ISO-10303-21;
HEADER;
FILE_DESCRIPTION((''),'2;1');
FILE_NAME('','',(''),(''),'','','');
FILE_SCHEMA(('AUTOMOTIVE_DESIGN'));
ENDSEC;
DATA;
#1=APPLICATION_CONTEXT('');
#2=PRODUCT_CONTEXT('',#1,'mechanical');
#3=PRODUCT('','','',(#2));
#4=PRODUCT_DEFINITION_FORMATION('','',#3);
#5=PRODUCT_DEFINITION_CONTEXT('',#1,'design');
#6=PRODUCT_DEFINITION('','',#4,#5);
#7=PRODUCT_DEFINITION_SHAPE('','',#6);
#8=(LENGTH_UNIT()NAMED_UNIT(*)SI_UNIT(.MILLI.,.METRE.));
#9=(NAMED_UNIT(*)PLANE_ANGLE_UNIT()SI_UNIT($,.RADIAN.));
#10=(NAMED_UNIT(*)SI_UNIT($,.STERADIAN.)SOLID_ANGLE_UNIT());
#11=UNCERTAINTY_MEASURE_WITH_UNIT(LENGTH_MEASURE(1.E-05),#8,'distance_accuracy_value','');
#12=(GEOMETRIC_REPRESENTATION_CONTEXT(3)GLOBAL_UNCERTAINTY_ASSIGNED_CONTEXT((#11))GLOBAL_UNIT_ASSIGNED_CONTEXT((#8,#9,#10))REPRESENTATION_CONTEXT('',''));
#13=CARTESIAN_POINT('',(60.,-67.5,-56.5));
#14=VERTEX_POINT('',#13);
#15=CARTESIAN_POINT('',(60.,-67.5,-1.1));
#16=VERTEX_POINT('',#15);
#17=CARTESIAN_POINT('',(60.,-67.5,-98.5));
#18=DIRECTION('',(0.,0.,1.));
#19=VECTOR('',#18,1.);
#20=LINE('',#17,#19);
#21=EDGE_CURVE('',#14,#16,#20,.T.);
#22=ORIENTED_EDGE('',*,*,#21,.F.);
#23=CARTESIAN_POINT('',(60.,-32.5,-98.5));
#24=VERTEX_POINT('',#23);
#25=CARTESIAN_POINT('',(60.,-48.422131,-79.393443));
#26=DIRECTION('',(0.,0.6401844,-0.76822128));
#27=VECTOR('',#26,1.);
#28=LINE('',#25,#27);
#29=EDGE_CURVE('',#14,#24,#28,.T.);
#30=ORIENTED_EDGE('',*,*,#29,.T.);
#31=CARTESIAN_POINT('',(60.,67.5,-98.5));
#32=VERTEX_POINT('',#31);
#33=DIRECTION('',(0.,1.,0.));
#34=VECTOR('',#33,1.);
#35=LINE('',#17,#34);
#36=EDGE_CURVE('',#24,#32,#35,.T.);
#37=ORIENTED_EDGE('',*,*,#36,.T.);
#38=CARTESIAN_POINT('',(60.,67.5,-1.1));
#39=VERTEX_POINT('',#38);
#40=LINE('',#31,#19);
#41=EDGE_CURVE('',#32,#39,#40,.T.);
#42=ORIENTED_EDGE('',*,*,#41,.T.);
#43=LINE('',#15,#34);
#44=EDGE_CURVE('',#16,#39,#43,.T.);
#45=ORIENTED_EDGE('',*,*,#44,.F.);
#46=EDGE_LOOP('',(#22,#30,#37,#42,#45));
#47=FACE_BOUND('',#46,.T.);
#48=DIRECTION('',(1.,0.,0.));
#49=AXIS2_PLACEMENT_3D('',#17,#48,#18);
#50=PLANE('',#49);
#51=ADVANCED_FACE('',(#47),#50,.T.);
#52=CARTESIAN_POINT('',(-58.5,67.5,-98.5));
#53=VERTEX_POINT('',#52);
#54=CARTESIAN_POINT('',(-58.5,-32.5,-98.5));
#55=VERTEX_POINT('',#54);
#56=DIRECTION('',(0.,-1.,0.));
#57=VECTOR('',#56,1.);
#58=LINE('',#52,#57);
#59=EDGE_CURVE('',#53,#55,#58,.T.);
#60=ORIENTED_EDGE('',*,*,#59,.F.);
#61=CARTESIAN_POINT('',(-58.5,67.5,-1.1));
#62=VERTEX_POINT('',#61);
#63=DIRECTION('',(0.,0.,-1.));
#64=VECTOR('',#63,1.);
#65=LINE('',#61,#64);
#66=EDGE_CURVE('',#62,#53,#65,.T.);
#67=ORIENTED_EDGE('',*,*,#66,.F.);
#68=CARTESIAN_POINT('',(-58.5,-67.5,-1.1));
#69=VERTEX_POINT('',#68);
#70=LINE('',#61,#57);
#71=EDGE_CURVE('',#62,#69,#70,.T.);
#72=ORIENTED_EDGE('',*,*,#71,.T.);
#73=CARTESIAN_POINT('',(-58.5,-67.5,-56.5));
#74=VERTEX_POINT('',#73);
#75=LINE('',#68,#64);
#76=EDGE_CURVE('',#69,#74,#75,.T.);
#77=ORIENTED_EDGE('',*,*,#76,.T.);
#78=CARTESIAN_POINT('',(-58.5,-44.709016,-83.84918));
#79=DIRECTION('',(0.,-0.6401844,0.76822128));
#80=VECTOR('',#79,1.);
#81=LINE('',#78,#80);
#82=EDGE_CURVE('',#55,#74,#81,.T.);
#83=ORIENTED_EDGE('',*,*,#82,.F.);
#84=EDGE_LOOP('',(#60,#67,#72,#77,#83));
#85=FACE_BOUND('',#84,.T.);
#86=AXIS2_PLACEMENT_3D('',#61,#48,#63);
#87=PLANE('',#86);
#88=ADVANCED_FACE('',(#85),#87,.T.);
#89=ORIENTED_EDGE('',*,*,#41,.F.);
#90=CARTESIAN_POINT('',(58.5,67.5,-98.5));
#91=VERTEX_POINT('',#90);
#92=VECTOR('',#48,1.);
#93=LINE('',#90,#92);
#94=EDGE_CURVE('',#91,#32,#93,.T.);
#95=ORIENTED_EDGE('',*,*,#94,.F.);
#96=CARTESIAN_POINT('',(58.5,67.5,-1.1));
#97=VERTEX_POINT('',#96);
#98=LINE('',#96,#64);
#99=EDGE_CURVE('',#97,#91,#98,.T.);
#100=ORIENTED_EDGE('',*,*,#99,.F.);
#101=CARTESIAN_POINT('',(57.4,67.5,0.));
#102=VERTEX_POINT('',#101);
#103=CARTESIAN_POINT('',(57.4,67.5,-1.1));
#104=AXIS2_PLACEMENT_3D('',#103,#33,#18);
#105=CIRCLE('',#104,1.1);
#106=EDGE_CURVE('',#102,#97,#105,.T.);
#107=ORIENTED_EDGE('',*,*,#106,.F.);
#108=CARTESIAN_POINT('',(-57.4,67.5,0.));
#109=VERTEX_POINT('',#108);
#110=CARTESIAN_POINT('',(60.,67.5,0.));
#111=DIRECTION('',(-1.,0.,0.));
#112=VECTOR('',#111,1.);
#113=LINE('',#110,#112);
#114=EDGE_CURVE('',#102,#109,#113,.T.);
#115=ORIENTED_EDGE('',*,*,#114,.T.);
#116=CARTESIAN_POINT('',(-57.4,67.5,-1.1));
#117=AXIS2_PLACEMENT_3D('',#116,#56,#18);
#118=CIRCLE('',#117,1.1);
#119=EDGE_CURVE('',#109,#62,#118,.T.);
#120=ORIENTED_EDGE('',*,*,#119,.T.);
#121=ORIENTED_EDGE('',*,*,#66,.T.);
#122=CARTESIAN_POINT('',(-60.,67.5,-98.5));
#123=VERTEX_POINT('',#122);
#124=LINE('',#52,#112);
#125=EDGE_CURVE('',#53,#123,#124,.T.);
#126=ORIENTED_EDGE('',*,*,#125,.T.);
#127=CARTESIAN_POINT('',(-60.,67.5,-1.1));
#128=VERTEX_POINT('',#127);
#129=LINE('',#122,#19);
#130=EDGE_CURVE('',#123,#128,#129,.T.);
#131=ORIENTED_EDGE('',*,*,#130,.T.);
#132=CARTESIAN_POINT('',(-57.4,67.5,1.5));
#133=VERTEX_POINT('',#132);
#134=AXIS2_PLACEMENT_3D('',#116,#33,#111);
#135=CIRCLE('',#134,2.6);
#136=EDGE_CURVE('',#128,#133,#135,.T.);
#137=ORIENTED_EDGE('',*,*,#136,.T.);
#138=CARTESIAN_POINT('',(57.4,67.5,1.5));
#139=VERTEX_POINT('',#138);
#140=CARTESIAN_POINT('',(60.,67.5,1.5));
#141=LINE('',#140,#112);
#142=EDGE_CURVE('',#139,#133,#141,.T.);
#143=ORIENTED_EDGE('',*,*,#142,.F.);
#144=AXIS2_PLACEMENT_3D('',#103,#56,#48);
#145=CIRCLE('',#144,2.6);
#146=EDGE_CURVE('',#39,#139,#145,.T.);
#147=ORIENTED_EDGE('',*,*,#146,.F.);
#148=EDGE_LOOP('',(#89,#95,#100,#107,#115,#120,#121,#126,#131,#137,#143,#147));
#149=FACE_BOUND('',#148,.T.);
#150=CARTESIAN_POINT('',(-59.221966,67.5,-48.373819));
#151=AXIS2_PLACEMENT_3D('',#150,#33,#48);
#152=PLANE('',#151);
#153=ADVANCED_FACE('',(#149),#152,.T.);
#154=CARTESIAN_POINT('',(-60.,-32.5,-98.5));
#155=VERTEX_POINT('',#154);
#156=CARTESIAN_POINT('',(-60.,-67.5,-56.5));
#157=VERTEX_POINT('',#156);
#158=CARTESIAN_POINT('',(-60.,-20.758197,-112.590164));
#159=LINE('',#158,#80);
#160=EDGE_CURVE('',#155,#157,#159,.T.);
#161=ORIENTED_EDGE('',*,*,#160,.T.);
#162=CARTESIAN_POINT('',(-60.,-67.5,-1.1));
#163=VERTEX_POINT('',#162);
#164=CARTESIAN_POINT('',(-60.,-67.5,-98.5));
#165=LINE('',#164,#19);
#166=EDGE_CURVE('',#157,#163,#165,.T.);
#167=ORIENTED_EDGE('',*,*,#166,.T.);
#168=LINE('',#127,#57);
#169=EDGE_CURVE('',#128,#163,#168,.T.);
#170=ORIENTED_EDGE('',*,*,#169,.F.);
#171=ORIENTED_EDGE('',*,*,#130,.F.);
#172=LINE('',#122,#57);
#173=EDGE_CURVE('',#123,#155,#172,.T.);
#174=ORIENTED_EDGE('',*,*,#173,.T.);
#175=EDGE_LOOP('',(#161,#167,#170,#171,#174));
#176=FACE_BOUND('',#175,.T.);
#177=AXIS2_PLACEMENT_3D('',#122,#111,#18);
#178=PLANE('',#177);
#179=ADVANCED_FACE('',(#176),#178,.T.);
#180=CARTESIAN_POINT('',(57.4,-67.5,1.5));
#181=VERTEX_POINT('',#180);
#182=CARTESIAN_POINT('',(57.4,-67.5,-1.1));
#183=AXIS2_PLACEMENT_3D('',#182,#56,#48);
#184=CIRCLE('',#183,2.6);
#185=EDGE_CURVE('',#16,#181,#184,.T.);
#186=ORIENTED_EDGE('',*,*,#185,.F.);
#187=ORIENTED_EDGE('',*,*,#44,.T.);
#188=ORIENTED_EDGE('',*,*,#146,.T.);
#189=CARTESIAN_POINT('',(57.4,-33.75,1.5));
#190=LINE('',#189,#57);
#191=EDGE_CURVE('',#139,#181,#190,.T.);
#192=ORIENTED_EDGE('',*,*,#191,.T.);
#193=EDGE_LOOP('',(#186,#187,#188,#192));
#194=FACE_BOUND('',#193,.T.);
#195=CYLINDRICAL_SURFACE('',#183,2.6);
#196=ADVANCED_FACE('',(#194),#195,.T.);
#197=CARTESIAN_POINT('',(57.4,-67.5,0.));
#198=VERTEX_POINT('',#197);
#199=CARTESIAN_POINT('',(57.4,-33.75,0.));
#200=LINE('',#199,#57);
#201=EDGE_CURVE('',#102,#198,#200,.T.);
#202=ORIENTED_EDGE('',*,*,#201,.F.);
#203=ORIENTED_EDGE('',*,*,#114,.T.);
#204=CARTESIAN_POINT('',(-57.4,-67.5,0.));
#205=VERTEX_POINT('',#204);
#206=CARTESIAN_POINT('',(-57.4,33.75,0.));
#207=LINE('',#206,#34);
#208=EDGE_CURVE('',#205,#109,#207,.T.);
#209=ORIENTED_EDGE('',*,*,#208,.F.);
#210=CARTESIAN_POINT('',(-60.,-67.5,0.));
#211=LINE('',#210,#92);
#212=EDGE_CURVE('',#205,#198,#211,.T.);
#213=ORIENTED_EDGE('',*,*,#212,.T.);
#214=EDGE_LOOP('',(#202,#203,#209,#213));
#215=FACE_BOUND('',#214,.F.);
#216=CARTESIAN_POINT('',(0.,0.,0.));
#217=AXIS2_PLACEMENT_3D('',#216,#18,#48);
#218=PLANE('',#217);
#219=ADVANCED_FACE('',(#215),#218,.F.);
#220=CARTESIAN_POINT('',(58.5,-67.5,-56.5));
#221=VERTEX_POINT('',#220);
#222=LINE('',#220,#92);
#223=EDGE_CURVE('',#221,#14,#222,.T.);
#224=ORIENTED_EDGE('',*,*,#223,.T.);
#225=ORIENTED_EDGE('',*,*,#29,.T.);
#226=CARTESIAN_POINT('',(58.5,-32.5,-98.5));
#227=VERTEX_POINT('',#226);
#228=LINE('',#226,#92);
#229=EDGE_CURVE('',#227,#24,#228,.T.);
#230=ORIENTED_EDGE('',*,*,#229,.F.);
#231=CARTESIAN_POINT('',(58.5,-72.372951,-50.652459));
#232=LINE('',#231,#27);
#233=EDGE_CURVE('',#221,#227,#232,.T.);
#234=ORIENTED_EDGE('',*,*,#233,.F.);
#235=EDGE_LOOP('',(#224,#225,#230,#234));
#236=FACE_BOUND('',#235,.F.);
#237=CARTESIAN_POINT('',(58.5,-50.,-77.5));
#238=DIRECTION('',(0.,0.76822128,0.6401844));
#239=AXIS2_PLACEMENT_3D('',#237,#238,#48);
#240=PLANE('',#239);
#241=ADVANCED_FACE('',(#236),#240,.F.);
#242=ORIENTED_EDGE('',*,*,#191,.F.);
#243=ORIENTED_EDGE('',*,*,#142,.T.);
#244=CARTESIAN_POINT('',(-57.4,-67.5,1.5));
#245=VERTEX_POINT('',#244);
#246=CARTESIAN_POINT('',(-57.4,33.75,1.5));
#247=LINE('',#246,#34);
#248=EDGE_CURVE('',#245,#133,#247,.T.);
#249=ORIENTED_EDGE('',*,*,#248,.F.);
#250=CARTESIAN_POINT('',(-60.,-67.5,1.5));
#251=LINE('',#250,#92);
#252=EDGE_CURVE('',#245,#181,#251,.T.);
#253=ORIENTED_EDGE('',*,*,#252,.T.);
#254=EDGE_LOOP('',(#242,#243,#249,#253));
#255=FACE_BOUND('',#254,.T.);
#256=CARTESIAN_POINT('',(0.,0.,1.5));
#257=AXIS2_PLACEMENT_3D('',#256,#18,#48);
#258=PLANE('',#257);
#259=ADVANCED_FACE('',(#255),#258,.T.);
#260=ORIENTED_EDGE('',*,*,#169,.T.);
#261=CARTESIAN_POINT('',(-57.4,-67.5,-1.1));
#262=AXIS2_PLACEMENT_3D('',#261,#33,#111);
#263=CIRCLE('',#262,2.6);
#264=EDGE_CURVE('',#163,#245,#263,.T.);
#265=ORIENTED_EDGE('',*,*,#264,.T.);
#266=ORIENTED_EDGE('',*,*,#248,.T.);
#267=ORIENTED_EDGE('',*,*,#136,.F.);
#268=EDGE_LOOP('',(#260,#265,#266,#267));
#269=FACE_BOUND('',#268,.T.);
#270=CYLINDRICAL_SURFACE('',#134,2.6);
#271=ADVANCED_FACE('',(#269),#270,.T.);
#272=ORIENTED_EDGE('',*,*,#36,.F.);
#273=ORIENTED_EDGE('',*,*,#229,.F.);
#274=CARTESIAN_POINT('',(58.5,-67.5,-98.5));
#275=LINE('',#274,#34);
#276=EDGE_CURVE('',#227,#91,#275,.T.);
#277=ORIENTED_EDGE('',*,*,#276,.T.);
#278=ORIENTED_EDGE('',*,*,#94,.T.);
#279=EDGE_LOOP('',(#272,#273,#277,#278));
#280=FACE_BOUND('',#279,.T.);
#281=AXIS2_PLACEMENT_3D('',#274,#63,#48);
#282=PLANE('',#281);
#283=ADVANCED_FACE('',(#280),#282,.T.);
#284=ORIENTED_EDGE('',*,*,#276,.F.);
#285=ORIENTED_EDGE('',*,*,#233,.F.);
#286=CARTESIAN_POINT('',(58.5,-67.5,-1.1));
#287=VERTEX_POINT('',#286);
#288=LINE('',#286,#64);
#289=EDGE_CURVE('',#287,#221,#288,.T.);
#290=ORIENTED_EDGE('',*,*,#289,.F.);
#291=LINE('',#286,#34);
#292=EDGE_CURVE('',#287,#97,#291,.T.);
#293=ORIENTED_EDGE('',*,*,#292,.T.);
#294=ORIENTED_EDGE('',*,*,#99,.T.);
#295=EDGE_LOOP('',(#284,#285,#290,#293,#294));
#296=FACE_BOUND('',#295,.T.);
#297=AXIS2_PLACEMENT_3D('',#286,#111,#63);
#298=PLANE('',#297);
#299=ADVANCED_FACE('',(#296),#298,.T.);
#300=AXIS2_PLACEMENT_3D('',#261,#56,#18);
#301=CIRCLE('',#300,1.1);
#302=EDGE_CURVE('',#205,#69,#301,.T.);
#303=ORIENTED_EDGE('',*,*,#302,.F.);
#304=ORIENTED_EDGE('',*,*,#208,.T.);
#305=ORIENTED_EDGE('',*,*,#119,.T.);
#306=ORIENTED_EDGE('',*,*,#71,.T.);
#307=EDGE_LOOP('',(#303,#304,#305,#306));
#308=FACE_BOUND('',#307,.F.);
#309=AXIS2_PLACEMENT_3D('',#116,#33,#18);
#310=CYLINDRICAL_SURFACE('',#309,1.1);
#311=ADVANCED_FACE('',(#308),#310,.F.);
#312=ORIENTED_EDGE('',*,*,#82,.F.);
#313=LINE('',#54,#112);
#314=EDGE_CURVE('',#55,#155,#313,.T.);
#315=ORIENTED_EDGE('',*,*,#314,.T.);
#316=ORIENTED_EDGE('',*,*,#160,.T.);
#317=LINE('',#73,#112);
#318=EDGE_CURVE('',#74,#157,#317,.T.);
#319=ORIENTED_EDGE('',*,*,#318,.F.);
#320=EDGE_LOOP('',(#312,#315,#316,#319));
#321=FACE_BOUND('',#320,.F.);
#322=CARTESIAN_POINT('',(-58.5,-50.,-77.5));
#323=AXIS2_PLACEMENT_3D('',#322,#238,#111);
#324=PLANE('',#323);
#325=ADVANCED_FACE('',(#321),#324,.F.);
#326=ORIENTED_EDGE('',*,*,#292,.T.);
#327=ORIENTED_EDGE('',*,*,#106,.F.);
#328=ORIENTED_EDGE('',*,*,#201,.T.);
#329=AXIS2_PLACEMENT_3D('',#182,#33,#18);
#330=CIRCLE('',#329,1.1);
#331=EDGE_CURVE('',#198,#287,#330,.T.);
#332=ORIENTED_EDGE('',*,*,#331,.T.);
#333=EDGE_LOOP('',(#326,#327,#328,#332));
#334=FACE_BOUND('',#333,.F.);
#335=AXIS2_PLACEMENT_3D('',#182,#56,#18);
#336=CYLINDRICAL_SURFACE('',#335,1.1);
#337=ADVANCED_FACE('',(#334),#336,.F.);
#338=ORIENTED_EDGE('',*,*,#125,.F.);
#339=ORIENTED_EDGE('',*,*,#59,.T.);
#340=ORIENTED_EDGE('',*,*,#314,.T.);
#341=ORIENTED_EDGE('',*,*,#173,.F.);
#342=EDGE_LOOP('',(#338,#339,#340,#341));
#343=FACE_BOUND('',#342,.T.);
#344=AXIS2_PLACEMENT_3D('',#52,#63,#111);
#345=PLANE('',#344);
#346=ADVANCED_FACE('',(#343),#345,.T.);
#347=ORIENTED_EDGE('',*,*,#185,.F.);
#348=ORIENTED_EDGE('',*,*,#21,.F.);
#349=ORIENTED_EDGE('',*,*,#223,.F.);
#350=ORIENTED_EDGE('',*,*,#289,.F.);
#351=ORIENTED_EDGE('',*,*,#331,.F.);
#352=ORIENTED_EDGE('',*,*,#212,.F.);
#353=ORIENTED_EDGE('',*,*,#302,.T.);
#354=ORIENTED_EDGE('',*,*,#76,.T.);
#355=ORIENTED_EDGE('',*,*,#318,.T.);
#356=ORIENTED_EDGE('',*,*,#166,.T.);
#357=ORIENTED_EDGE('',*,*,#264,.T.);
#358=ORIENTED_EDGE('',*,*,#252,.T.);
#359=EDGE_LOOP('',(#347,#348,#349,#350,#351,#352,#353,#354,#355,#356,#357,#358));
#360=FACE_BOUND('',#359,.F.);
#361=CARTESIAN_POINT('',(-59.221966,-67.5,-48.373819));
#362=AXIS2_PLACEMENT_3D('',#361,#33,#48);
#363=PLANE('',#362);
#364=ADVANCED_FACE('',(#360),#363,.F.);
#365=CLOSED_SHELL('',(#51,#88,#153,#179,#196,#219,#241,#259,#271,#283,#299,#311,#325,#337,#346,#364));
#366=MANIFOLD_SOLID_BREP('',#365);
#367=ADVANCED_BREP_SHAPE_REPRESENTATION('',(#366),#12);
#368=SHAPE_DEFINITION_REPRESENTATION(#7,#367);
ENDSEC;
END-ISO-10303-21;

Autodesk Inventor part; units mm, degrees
ref_plane "YZ Plane" through (0, 0, 0) normal (1, 0, 0) x (0, 1, 0)
ref_plane "XZ Plane" through (0, 0, 0) normal (0, 1, 0) x (-1, 0, 0)
ref_plane "XY Plane" through (0, 0, 0) normal (0, 0, 1) x (1, 0, 0)
sketch "Эскиз5" plane through (0, 0, 0) normal (0, 0, 1) x (1, 0, 0)
  line L0 (-60, -67.5) -> (60, -67.5)
  line L1 (60, -67.5) -> (60, 67.5)
  line L2 (60, 67.5) -> (-60, 67.5)
  line L3 (-60, 67.5) -> (-60, -67.5)
  line L4 (-60, -67.5) -> (60, 67.5) construction
  line L5 (60, -67.5) -> (-60, 67.5) construction
  point P0 (0, 0)
  dimension "d64" = 120
  dimension "d65" = 135
extrude "Пластина2" add sketch "Эскиз5" along normal blind 1.5
sketch "Эскиз6" plane through (-58.5, 67.5, 1.5) normal (-1, 0, 0) x (0, -1, 0)
  line L0 (135, 0) -> (0, 0)
  line L1 (0, 0) -> (0, -100)
  line L2 (0, -100) -> (135, -100)
  line L3 (135, -100) -> (135, 0)
edge flange "Фланец1" height 100 angle 90 thickness 1.5 bend radius 1.1 thickness toward (-1, 0, 0) relief tear relief width 1.5 relief depth 0.75 corner gap 1.1 corner form 0 edges at (-60, 0, 0) (60, 0, 0) wall of the first edge with corners at (-58.5, -67.5, 1.5) (-58.5, 67.5, 1.5) (-58.5, 67.5, -98.5) (-58.5, -67.5, -98.5)
bend "Сгиб1"
corner "УглСтык1"
chamfer "УглФаска1" distance 35 distance2 42 1 edges at (-59.25, -67.5, -98.5) measured on face at (-59, -22.5, -98.5)
chamfer "УглФаска2" distance 42 distance2 35 1 edges at (59.25, -67.5, -98.5) measured on face at (19.1333, -67.5, 1)
equation "\"d67\" = Ширина_просечки"
equation "\"d68\" = Глубина_просечки"
equation "\"d69\" = Минимальный_остаток"
equation "\"d70\" = Радиус_гибки"
equation "\"d73\" = Радиус_гибки"
equation "\"d74\" = Размер_высечки"
equation "\"d75\" = Размер_зазора"
equation "\"d76\" = Радиус_Якоби"
equation "\"Ширина_просечки\" = Толщина"
equation "\"Глубина_просечки\" = 0.5 * Толщина"
equation "\"Размер_высечки\" = 4 * Толщина"
equation "\"Минимальный_остаток\" = 2 * Толщина"
equation "\"Радиус_перехода\" = Радиус_гибки"
equation "\"Радиус_Якоби\" = Радиус_гибки"
equation "\"Размер_зазора\" = Толщина"
equation "\"d2\" = Радиус_гибки"
equation "\"d66\" = Радиус_гибки"
equation "\"Радиус_гибки\" = 1.1"
equation "\"Толщина\" = 1.5"
properties material "Сталь"
